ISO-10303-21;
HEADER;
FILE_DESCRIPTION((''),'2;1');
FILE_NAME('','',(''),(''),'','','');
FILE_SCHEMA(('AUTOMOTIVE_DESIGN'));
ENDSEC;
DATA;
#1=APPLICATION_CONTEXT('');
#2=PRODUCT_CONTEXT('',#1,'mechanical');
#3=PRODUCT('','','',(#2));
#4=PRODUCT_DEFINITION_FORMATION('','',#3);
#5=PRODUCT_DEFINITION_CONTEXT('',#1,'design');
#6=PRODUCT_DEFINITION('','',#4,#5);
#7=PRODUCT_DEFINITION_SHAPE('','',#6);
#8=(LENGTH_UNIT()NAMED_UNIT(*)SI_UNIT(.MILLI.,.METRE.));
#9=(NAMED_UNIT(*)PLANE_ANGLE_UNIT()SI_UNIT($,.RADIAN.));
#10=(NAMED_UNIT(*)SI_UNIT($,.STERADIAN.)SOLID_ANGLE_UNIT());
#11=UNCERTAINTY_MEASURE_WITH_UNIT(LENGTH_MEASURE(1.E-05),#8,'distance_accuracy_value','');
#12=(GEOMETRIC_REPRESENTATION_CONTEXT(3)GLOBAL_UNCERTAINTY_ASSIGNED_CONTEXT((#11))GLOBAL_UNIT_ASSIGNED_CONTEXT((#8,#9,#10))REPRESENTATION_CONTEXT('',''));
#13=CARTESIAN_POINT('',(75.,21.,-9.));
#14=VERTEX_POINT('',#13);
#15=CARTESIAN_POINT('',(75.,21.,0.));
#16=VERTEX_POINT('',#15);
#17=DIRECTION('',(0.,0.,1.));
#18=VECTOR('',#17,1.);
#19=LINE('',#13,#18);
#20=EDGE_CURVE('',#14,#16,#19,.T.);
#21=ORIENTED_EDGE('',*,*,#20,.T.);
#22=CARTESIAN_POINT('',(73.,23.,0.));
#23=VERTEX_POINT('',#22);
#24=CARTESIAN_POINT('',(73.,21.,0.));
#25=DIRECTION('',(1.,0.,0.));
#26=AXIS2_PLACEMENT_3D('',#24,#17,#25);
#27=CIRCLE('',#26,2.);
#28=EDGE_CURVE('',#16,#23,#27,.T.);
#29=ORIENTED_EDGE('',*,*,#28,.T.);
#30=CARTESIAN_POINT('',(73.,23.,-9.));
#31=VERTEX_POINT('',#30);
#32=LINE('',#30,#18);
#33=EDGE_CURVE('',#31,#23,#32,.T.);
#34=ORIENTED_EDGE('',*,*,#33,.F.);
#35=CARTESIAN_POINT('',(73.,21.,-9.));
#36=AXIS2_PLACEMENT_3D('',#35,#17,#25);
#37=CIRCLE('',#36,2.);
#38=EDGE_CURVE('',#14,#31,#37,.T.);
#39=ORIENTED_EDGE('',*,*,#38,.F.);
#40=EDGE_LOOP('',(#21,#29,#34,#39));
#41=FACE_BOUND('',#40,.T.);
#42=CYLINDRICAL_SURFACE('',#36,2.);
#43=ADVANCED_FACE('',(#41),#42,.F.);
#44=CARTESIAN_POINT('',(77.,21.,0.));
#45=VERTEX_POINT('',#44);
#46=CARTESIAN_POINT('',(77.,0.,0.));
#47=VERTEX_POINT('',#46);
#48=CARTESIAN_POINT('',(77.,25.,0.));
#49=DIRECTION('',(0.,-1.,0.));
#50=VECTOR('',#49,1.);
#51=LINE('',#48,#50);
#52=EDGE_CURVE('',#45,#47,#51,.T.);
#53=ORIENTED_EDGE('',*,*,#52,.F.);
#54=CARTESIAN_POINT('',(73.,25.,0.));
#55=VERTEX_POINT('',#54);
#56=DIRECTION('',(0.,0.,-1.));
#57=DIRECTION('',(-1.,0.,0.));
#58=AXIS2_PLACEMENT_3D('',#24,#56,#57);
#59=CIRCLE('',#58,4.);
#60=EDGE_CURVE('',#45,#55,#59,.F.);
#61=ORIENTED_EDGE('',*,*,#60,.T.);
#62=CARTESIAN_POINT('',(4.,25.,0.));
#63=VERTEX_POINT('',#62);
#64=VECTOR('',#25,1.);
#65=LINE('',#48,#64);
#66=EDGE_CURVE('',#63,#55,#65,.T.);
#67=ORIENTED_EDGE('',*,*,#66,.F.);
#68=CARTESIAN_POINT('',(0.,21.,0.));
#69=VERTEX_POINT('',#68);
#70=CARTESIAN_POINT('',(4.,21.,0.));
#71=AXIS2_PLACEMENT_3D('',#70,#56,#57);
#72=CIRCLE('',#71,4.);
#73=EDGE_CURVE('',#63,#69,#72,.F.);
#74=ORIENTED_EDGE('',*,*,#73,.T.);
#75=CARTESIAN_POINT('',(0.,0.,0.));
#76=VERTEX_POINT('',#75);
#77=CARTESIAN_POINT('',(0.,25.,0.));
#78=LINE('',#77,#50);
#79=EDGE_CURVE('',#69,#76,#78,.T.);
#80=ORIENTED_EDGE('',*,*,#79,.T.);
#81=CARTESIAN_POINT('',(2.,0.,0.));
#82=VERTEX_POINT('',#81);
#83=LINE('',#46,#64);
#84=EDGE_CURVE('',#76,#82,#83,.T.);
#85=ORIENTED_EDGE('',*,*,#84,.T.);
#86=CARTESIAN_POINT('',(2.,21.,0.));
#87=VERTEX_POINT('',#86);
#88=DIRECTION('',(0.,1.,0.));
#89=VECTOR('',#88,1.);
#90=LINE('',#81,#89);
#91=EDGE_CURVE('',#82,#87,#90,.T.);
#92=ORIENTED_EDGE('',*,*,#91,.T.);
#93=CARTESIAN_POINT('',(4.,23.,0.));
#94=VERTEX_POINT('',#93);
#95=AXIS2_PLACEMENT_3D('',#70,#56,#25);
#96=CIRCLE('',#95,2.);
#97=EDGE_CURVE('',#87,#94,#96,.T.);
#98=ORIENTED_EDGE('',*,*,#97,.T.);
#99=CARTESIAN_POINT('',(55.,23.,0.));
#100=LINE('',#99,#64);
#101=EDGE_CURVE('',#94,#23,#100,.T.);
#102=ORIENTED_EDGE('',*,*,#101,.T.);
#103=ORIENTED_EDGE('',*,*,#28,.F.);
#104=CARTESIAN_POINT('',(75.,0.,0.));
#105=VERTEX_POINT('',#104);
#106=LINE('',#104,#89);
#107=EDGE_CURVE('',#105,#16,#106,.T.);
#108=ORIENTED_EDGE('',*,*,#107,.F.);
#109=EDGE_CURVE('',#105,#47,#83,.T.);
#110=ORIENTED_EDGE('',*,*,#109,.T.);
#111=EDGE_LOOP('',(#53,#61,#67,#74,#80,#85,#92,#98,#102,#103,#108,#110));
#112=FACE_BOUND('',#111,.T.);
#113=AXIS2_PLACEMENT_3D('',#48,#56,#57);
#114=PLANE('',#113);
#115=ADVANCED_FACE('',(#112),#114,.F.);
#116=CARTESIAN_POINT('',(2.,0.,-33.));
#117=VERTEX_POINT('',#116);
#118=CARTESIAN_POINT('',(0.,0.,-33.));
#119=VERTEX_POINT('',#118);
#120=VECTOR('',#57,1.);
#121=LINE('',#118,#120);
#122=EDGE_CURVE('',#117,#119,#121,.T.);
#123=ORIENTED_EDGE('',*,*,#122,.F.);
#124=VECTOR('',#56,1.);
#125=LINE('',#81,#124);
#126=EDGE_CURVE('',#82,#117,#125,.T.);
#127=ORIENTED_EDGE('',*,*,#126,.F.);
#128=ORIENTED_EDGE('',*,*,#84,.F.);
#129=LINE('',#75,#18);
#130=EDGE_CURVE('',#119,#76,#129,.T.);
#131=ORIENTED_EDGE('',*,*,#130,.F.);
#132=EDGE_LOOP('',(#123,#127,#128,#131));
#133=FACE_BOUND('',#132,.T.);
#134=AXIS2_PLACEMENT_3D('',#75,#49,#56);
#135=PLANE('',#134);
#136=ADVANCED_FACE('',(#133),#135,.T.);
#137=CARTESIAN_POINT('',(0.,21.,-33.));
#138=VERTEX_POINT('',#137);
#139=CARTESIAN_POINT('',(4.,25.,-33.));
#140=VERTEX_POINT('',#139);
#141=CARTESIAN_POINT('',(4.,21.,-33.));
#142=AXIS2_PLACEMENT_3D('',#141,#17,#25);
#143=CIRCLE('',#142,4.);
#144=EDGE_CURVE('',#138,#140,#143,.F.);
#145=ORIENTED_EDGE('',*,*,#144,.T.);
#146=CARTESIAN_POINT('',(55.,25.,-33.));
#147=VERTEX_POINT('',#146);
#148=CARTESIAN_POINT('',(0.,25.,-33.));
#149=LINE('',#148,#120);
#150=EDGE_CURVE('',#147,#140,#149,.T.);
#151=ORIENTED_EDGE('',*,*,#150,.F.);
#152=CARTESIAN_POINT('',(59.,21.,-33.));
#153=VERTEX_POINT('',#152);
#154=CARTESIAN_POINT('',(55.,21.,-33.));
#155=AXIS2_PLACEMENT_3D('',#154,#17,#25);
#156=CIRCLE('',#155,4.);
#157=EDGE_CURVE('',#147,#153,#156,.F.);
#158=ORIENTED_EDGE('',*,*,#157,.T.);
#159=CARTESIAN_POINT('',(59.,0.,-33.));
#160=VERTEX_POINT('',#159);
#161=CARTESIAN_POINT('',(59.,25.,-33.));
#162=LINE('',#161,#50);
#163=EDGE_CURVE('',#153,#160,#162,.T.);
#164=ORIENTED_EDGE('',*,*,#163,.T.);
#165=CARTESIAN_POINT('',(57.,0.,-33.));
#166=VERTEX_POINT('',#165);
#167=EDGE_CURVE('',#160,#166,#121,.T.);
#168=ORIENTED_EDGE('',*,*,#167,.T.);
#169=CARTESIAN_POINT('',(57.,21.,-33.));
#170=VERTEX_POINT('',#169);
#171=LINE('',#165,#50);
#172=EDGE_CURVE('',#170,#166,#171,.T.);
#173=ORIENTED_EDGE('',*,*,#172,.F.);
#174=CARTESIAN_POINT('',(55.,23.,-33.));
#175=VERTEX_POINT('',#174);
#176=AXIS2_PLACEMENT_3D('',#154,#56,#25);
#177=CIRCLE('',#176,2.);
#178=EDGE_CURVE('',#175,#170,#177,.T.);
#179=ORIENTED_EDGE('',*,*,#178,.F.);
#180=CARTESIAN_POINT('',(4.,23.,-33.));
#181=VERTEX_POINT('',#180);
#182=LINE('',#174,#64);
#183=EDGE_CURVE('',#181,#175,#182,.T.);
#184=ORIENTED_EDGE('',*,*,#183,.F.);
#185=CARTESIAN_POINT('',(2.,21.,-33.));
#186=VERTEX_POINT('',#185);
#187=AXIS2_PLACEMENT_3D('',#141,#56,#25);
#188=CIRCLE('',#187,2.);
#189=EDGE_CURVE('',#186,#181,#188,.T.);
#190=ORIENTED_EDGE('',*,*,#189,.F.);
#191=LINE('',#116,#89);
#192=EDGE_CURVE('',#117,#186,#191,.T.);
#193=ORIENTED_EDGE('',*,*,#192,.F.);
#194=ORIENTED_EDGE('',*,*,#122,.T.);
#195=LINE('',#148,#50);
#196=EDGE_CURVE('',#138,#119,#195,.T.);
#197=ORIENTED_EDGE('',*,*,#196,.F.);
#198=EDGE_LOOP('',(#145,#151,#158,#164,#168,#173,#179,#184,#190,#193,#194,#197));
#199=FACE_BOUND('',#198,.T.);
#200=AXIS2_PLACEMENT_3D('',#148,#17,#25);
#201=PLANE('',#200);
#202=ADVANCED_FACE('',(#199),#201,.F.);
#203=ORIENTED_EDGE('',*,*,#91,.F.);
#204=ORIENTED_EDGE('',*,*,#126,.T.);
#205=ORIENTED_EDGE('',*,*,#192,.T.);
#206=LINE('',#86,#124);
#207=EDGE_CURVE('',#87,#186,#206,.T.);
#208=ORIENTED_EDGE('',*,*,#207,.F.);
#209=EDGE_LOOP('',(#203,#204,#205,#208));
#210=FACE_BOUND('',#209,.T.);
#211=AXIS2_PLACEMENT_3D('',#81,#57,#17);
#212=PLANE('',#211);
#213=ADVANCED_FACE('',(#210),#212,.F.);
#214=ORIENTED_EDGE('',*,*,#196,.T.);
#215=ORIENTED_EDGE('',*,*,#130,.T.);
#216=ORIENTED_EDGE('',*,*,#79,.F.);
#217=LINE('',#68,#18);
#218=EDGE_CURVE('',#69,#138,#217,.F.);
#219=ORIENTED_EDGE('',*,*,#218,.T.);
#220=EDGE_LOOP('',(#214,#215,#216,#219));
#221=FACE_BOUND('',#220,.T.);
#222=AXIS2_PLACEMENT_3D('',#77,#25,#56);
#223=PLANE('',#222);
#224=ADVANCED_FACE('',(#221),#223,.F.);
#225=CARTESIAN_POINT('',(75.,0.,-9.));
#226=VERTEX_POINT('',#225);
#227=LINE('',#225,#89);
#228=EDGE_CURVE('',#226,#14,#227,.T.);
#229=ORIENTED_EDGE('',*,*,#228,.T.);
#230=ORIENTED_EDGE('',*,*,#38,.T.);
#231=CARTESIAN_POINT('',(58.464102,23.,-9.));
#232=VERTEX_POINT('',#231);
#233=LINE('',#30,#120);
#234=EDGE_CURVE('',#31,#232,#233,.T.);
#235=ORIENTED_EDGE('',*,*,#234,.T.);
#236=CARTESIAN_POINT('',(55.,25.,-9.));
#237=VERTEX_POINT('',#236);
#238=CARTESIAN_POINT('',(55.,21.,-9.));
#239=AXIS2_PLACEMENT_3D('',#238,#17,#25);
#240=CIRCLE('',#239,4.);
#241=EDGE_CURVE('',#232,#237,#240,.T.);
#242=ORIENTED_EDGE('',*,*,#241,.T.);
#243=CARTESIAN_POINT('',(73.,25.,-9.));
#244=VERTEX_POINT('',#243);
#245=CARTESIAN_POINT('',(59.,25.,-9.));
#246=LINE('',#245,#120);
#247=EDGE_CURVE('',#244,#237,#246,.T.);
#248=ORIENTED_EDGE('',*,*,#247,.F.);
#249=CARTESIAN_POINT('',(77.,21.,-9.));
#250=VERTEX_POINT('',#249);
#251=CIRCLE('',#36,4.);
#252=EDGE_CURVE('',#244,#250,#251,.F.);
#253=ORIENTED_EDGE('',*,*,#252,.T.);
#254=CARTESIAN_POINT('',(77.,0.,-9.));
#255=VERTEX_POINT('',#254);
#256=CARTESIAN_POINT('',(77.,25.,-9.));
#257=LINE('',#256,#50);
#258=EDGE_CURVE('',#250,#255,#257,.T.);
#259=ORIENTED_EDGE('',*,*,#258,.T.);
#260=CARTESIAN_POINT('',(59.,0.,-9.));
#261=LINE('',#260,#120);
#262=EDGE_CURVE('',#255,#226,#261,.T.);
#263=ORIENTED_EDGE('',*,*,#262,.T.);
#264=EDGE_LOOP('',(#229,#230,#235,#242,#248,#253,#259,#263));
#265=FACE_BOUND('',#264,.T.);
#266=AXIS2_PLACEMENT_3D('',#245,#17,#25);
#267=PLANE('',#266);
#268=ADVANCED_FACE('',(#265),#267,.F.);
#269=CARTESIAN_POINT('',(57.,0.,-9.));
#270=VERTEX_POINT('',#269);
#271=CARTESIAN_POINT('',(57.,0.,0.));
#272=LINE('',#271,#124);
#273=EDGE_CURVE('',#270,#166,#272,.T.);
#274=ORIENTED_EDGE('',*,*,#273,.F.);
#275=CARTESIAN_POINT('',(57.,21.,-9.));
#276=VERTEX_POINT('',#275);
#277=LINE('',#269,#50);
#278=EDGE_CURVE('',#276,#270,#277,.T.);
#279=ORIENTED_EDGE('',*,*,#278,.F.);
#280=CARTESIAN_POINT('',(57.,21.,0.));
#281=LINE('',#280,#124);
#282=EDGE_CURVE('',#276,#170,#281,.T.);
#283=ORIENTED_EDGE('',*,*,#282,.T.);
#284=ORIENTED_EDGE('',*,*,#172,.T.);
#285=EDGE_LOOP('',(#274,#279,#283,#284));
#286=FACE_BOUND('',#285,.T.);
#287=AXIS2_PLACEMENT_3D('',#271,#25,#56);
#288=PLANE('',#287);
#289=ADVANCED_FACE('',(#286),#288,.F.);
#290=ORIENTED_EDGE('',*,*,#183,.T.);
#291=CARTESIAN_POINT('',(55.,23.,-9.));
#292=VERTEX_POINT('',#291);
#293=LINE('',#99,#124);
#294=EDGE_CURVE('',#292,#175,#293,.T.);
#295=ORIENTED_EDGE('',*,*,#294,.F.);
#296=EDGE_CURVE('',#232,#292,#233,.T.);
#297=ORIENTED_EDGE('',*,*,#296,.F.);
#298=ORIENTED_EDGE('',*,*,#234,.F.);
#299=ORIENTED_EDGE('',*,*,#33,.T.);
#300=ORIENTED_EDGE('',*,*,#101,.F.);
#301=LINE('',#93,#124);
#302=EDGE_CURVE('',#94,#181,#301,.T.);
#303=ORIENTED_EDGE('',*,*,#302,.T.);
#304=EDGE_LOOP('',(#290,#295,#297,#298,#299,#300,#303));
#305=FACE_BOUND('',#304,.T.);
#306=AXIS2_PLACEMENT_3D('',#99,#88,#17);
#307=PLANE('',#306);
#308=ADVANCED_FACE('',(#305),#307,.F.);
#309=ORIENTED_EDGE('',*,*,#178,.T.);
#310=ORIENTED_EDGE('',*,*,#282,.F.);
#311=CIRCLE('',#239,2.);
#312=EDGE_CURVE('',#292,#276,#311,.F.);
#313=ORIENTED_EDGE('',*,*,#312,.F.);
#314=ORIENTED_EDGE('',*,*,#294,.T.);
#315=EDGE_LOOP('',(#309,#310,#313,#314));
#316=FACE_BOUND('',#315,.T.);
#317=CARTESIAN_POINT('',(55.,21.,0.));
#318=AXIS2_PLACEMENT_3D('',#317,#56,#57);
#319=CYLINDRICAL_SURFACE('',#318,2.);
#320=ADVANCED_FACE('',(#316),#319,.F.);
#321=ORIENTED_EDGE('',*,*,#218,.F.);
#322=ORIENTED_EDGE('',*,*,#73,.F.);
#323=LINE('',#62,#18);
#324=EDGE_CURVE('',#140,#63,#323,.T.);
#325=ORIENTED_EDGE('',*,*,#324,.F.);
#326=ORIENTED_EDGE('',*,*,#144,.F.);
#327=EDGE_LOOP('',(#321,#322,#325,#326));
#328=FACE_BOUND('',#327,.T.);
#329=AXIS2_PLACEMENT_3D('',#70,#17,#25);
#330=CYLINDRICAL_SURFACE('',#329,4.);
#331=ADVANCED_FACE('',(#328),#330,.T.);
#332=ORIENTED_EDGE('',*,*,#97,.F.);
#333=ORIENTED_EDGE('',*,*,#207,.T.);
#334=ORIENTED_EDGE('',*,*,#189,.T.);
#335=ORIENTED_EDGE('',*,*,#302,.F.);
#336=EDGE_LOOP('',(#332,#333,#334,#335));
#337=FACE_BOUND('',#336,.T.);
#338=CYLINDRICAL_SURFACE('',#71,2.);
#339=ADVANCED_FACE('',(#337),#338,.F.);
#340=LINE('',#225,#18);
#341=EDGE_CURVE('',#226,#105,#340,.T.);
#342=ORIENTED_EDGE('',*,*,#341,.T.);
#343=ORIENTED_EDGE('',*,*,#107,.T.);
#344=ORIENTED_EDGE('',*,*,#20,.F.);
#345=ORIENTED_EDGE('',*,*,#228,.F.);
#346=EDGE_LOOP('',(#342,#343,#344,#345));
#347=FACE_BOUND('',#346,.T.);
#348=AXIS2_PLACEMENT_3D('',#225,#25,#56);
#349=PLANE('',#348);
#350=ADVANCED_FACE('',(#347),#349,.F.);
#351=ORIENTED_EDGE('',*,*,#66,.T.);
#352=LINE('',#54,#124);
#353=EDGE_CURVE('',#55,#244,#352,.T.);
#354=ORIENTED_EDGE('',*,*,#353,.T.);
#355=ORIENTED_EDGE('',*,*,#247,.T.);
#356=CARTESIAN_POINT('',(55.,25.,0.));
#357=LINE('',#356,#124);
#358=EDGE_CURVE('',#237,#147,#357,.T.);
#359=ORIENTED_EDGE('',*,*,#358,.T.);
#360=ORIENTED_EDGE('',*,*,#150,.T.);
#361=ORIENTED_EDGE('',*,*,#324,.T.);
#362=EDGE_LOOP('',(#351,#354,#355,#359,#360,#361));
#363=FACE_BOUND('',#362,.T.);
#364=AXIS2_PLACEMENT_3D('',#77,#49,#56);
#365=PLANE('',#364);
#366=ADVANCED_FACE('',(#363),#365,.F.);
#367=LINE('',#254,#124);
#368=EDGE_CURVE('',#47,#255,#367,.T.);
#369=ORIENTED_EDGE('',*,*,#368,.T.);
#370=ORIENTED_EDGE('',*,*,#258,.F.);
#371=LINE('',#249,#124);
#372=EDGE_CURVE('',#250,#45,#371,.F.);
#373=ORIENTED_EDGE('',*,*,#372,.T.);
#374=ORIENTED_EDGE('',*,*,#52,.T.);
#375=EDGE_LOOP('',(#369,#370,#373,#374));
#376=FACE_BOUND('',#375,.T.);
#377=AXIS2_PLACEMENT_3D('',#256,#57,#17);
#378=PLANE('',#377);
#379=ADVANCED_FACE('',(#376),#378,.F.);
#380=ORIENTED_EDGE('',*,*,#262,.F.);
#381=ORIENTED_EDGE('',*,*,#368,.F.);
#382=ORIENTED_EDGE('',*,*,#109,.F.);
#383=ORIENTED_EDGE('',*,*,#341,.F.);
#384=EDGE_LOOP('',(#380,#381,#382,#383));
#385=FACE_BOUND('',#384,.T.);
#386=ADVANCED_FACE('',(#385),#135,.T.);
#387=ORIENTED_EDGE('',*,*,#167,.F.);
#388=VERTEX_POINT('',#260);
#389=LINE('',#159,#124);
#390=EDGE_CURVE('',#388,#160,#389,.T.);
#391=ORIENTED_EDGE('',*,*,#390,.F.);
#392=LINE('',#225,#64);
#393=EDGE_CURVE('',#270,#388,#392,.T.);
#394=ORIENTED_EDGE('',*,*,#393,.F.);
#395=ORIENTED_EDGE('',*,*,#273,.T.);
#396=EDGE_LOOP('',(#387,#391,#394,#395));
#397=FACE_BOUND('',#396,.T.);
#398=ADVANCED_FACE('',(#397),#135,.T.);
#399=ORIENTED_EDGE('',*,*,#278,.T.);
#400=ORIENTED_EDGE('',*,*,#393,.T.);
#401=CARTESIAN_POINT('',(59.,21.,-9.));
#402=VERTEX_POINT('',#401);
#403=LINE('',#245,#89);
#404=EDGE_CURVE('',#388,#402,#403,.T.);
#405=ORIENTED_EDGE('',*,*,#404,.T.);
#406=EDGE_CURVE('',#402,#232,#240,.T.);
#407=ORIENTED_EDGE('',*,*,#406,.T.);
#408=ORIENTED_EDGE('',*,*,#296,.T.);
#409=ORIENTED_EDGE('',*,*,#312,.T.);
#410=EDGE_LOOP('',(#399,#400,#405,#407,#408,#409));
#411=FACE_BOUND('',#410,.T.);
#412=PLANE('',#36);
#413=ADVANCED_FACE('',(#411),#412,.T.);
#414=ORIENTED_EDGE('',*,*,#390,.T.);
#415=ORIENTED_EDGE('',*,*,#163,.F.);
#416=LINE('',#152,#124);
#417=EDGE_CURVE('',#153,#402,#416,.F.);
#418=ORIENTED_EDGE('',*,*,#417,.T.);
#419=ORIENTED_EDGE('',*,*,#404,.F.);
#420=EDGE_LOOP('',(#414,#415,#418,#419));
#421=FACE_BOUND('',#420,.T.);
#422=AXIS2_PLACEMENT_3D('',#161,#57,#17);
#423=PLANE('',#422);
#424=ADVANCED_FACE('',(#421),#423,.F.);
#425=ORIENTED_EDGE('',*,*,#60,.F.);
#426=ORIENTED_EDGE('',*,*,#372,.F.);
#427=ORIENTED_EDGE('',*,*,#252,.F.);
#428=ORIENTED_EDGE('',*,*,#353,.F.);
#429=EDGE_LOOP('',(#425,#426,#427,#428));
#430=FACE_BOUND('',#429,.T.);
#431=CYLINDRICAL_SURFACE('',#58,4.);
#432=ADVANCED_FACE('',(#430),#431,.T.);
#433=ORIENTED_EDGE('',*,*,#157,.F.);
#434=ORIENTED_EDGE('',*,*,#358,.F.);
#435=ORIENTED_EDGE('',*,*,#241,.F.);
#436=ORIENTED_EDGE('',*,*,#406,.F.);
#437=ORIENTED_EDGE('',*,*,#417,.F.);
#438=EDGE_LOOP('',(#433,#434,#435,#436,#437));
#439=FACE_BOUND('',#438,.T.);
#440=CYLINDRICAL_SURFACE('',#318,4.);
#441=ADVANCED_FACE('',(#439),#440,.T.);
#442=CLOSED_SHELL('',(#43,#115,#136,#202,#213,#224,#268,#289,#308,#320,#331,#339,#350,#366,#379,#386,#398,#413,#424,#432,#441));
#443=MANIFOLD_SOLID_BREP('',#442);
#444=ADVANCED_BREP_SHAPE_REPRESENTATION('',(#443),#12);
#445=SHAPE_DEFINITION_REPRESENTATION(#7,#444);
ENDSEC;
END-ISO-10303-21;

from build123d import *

# Parameters (mm, degrees)
BOSS_EXTRUDE1_DEPTH = 25
CUT_EXTRUDE1_DEPTH  = 88.424252928
CUT_EXTRUDE2_DEPTH  = 9
FILLET3_R           = 4


with BuildPart() as part:
    # Sketch1 → Boss-Extrude1 (new body)
    with BuildSketch(Plane(origin=(0, 0, 0), x_dir=(1, 0, 0), z_dir=(0, 1, 0))):
        Polygon((0, 0), (0, 33), (59, 33), (59, 9), (77, 9), (77, 0), align=None)
    extrude(amount=BOSS_EXTRUDE1_DEPTH)

    # Sketch3 → Cut-Extrude1 (cut, through all)
    with BuildSketch(Plane(origin=(0, 0, -33), x_dir=(-1, 0, 0), z_dir=(0, 0, -1))):
        with BuildLine():
            Line((-57, 0), (-2, 0))
            Line((-2, 0), (-2, 21))
            ThreePointArc((-2, 21), (-2.585786438, 22.414213562), (-4, 23))
            Line((-4, 23), (-55, 23))
            ThreePointArc((-55, 23), (-56.414213562, 22.414213562), (-57, 21))
            Line((-57, 21), (-57, 0))
        make_face()
    extrude(amount=-CUT_EXTRUDE1_DEPTH, mode=Mode.SUBTRACT)

    # Sketch4 → Cut-Extrude2 (cut)
    with BuildSketch(Plane.XY):
        with BuildLine():
            Line((75, 0), (51.080310893, 0))
            Line((51.080310893, 0), (51.080310893, 23))
            Line((51.080310893, 23), (73, 23))
            ThreePointArc((73, 23), (74.414213562, 22.414213562), (75, 21))
            Line((75, 21), (75, 0))
        make_face()
    extrude(amount=-CUT_EXTRUDE2_DEPTH, mode=Mode.SUBTRACT)

    # Fillet3
    # the kernel refuses this fillet: 4 mm, written as the material it takes off along each edge
    with BuildSketch(Plane(origin=(59, 25, -43), x_dir=(-1, 0, 0), z_dir=(0, 0, 1))) as fillet3_piece_1:
        with BuildLine():
            CenterArc((FILLET3_R, FILLET3_R), FILLET3_R, 180, 90)
            Line((0, FILLET3_R), (0, 0))
            Line((0, 0), (FILLET3_R, 0))
        make_face()
    extrude(amount=34, mode=Mode.SUBTRACT)
    with BuildSketch(Plane(origin=(0, 25, 10), x_dir=(0, -1, 0), z_dir=(0, 0, -1))) as fillet3_piece_2:
        with BuildLine():
            CenterArc((FILLET3_R, -FILLET3_R), FILLET3_R, 90, 90)
            Line((0, -FILLET3_R), (0, 0))
            Line((0, 0), (FILLET3_R, 0))
        make_face()
    extrude(amount=53, mode=Mode.SUBTRACT)
    with BuildSketch(Plane(origin=(77, 25, -19), x_dir=(-1, 0, 0), z_dir=(0, 0, 1))) as fillet3_piece_3:
        with BuildLine():
            CenterArc((FILLET3_R, FILLET3_R), FILLET3_R, 180, 90)
            Line((0, FILLET3_R), (0, 0))
            Line((0, 0), (FILLET3_R, 0))
        make_face()
    extrude(amount=29, mode=Mode.SUBTRACT)


solid = part.part
